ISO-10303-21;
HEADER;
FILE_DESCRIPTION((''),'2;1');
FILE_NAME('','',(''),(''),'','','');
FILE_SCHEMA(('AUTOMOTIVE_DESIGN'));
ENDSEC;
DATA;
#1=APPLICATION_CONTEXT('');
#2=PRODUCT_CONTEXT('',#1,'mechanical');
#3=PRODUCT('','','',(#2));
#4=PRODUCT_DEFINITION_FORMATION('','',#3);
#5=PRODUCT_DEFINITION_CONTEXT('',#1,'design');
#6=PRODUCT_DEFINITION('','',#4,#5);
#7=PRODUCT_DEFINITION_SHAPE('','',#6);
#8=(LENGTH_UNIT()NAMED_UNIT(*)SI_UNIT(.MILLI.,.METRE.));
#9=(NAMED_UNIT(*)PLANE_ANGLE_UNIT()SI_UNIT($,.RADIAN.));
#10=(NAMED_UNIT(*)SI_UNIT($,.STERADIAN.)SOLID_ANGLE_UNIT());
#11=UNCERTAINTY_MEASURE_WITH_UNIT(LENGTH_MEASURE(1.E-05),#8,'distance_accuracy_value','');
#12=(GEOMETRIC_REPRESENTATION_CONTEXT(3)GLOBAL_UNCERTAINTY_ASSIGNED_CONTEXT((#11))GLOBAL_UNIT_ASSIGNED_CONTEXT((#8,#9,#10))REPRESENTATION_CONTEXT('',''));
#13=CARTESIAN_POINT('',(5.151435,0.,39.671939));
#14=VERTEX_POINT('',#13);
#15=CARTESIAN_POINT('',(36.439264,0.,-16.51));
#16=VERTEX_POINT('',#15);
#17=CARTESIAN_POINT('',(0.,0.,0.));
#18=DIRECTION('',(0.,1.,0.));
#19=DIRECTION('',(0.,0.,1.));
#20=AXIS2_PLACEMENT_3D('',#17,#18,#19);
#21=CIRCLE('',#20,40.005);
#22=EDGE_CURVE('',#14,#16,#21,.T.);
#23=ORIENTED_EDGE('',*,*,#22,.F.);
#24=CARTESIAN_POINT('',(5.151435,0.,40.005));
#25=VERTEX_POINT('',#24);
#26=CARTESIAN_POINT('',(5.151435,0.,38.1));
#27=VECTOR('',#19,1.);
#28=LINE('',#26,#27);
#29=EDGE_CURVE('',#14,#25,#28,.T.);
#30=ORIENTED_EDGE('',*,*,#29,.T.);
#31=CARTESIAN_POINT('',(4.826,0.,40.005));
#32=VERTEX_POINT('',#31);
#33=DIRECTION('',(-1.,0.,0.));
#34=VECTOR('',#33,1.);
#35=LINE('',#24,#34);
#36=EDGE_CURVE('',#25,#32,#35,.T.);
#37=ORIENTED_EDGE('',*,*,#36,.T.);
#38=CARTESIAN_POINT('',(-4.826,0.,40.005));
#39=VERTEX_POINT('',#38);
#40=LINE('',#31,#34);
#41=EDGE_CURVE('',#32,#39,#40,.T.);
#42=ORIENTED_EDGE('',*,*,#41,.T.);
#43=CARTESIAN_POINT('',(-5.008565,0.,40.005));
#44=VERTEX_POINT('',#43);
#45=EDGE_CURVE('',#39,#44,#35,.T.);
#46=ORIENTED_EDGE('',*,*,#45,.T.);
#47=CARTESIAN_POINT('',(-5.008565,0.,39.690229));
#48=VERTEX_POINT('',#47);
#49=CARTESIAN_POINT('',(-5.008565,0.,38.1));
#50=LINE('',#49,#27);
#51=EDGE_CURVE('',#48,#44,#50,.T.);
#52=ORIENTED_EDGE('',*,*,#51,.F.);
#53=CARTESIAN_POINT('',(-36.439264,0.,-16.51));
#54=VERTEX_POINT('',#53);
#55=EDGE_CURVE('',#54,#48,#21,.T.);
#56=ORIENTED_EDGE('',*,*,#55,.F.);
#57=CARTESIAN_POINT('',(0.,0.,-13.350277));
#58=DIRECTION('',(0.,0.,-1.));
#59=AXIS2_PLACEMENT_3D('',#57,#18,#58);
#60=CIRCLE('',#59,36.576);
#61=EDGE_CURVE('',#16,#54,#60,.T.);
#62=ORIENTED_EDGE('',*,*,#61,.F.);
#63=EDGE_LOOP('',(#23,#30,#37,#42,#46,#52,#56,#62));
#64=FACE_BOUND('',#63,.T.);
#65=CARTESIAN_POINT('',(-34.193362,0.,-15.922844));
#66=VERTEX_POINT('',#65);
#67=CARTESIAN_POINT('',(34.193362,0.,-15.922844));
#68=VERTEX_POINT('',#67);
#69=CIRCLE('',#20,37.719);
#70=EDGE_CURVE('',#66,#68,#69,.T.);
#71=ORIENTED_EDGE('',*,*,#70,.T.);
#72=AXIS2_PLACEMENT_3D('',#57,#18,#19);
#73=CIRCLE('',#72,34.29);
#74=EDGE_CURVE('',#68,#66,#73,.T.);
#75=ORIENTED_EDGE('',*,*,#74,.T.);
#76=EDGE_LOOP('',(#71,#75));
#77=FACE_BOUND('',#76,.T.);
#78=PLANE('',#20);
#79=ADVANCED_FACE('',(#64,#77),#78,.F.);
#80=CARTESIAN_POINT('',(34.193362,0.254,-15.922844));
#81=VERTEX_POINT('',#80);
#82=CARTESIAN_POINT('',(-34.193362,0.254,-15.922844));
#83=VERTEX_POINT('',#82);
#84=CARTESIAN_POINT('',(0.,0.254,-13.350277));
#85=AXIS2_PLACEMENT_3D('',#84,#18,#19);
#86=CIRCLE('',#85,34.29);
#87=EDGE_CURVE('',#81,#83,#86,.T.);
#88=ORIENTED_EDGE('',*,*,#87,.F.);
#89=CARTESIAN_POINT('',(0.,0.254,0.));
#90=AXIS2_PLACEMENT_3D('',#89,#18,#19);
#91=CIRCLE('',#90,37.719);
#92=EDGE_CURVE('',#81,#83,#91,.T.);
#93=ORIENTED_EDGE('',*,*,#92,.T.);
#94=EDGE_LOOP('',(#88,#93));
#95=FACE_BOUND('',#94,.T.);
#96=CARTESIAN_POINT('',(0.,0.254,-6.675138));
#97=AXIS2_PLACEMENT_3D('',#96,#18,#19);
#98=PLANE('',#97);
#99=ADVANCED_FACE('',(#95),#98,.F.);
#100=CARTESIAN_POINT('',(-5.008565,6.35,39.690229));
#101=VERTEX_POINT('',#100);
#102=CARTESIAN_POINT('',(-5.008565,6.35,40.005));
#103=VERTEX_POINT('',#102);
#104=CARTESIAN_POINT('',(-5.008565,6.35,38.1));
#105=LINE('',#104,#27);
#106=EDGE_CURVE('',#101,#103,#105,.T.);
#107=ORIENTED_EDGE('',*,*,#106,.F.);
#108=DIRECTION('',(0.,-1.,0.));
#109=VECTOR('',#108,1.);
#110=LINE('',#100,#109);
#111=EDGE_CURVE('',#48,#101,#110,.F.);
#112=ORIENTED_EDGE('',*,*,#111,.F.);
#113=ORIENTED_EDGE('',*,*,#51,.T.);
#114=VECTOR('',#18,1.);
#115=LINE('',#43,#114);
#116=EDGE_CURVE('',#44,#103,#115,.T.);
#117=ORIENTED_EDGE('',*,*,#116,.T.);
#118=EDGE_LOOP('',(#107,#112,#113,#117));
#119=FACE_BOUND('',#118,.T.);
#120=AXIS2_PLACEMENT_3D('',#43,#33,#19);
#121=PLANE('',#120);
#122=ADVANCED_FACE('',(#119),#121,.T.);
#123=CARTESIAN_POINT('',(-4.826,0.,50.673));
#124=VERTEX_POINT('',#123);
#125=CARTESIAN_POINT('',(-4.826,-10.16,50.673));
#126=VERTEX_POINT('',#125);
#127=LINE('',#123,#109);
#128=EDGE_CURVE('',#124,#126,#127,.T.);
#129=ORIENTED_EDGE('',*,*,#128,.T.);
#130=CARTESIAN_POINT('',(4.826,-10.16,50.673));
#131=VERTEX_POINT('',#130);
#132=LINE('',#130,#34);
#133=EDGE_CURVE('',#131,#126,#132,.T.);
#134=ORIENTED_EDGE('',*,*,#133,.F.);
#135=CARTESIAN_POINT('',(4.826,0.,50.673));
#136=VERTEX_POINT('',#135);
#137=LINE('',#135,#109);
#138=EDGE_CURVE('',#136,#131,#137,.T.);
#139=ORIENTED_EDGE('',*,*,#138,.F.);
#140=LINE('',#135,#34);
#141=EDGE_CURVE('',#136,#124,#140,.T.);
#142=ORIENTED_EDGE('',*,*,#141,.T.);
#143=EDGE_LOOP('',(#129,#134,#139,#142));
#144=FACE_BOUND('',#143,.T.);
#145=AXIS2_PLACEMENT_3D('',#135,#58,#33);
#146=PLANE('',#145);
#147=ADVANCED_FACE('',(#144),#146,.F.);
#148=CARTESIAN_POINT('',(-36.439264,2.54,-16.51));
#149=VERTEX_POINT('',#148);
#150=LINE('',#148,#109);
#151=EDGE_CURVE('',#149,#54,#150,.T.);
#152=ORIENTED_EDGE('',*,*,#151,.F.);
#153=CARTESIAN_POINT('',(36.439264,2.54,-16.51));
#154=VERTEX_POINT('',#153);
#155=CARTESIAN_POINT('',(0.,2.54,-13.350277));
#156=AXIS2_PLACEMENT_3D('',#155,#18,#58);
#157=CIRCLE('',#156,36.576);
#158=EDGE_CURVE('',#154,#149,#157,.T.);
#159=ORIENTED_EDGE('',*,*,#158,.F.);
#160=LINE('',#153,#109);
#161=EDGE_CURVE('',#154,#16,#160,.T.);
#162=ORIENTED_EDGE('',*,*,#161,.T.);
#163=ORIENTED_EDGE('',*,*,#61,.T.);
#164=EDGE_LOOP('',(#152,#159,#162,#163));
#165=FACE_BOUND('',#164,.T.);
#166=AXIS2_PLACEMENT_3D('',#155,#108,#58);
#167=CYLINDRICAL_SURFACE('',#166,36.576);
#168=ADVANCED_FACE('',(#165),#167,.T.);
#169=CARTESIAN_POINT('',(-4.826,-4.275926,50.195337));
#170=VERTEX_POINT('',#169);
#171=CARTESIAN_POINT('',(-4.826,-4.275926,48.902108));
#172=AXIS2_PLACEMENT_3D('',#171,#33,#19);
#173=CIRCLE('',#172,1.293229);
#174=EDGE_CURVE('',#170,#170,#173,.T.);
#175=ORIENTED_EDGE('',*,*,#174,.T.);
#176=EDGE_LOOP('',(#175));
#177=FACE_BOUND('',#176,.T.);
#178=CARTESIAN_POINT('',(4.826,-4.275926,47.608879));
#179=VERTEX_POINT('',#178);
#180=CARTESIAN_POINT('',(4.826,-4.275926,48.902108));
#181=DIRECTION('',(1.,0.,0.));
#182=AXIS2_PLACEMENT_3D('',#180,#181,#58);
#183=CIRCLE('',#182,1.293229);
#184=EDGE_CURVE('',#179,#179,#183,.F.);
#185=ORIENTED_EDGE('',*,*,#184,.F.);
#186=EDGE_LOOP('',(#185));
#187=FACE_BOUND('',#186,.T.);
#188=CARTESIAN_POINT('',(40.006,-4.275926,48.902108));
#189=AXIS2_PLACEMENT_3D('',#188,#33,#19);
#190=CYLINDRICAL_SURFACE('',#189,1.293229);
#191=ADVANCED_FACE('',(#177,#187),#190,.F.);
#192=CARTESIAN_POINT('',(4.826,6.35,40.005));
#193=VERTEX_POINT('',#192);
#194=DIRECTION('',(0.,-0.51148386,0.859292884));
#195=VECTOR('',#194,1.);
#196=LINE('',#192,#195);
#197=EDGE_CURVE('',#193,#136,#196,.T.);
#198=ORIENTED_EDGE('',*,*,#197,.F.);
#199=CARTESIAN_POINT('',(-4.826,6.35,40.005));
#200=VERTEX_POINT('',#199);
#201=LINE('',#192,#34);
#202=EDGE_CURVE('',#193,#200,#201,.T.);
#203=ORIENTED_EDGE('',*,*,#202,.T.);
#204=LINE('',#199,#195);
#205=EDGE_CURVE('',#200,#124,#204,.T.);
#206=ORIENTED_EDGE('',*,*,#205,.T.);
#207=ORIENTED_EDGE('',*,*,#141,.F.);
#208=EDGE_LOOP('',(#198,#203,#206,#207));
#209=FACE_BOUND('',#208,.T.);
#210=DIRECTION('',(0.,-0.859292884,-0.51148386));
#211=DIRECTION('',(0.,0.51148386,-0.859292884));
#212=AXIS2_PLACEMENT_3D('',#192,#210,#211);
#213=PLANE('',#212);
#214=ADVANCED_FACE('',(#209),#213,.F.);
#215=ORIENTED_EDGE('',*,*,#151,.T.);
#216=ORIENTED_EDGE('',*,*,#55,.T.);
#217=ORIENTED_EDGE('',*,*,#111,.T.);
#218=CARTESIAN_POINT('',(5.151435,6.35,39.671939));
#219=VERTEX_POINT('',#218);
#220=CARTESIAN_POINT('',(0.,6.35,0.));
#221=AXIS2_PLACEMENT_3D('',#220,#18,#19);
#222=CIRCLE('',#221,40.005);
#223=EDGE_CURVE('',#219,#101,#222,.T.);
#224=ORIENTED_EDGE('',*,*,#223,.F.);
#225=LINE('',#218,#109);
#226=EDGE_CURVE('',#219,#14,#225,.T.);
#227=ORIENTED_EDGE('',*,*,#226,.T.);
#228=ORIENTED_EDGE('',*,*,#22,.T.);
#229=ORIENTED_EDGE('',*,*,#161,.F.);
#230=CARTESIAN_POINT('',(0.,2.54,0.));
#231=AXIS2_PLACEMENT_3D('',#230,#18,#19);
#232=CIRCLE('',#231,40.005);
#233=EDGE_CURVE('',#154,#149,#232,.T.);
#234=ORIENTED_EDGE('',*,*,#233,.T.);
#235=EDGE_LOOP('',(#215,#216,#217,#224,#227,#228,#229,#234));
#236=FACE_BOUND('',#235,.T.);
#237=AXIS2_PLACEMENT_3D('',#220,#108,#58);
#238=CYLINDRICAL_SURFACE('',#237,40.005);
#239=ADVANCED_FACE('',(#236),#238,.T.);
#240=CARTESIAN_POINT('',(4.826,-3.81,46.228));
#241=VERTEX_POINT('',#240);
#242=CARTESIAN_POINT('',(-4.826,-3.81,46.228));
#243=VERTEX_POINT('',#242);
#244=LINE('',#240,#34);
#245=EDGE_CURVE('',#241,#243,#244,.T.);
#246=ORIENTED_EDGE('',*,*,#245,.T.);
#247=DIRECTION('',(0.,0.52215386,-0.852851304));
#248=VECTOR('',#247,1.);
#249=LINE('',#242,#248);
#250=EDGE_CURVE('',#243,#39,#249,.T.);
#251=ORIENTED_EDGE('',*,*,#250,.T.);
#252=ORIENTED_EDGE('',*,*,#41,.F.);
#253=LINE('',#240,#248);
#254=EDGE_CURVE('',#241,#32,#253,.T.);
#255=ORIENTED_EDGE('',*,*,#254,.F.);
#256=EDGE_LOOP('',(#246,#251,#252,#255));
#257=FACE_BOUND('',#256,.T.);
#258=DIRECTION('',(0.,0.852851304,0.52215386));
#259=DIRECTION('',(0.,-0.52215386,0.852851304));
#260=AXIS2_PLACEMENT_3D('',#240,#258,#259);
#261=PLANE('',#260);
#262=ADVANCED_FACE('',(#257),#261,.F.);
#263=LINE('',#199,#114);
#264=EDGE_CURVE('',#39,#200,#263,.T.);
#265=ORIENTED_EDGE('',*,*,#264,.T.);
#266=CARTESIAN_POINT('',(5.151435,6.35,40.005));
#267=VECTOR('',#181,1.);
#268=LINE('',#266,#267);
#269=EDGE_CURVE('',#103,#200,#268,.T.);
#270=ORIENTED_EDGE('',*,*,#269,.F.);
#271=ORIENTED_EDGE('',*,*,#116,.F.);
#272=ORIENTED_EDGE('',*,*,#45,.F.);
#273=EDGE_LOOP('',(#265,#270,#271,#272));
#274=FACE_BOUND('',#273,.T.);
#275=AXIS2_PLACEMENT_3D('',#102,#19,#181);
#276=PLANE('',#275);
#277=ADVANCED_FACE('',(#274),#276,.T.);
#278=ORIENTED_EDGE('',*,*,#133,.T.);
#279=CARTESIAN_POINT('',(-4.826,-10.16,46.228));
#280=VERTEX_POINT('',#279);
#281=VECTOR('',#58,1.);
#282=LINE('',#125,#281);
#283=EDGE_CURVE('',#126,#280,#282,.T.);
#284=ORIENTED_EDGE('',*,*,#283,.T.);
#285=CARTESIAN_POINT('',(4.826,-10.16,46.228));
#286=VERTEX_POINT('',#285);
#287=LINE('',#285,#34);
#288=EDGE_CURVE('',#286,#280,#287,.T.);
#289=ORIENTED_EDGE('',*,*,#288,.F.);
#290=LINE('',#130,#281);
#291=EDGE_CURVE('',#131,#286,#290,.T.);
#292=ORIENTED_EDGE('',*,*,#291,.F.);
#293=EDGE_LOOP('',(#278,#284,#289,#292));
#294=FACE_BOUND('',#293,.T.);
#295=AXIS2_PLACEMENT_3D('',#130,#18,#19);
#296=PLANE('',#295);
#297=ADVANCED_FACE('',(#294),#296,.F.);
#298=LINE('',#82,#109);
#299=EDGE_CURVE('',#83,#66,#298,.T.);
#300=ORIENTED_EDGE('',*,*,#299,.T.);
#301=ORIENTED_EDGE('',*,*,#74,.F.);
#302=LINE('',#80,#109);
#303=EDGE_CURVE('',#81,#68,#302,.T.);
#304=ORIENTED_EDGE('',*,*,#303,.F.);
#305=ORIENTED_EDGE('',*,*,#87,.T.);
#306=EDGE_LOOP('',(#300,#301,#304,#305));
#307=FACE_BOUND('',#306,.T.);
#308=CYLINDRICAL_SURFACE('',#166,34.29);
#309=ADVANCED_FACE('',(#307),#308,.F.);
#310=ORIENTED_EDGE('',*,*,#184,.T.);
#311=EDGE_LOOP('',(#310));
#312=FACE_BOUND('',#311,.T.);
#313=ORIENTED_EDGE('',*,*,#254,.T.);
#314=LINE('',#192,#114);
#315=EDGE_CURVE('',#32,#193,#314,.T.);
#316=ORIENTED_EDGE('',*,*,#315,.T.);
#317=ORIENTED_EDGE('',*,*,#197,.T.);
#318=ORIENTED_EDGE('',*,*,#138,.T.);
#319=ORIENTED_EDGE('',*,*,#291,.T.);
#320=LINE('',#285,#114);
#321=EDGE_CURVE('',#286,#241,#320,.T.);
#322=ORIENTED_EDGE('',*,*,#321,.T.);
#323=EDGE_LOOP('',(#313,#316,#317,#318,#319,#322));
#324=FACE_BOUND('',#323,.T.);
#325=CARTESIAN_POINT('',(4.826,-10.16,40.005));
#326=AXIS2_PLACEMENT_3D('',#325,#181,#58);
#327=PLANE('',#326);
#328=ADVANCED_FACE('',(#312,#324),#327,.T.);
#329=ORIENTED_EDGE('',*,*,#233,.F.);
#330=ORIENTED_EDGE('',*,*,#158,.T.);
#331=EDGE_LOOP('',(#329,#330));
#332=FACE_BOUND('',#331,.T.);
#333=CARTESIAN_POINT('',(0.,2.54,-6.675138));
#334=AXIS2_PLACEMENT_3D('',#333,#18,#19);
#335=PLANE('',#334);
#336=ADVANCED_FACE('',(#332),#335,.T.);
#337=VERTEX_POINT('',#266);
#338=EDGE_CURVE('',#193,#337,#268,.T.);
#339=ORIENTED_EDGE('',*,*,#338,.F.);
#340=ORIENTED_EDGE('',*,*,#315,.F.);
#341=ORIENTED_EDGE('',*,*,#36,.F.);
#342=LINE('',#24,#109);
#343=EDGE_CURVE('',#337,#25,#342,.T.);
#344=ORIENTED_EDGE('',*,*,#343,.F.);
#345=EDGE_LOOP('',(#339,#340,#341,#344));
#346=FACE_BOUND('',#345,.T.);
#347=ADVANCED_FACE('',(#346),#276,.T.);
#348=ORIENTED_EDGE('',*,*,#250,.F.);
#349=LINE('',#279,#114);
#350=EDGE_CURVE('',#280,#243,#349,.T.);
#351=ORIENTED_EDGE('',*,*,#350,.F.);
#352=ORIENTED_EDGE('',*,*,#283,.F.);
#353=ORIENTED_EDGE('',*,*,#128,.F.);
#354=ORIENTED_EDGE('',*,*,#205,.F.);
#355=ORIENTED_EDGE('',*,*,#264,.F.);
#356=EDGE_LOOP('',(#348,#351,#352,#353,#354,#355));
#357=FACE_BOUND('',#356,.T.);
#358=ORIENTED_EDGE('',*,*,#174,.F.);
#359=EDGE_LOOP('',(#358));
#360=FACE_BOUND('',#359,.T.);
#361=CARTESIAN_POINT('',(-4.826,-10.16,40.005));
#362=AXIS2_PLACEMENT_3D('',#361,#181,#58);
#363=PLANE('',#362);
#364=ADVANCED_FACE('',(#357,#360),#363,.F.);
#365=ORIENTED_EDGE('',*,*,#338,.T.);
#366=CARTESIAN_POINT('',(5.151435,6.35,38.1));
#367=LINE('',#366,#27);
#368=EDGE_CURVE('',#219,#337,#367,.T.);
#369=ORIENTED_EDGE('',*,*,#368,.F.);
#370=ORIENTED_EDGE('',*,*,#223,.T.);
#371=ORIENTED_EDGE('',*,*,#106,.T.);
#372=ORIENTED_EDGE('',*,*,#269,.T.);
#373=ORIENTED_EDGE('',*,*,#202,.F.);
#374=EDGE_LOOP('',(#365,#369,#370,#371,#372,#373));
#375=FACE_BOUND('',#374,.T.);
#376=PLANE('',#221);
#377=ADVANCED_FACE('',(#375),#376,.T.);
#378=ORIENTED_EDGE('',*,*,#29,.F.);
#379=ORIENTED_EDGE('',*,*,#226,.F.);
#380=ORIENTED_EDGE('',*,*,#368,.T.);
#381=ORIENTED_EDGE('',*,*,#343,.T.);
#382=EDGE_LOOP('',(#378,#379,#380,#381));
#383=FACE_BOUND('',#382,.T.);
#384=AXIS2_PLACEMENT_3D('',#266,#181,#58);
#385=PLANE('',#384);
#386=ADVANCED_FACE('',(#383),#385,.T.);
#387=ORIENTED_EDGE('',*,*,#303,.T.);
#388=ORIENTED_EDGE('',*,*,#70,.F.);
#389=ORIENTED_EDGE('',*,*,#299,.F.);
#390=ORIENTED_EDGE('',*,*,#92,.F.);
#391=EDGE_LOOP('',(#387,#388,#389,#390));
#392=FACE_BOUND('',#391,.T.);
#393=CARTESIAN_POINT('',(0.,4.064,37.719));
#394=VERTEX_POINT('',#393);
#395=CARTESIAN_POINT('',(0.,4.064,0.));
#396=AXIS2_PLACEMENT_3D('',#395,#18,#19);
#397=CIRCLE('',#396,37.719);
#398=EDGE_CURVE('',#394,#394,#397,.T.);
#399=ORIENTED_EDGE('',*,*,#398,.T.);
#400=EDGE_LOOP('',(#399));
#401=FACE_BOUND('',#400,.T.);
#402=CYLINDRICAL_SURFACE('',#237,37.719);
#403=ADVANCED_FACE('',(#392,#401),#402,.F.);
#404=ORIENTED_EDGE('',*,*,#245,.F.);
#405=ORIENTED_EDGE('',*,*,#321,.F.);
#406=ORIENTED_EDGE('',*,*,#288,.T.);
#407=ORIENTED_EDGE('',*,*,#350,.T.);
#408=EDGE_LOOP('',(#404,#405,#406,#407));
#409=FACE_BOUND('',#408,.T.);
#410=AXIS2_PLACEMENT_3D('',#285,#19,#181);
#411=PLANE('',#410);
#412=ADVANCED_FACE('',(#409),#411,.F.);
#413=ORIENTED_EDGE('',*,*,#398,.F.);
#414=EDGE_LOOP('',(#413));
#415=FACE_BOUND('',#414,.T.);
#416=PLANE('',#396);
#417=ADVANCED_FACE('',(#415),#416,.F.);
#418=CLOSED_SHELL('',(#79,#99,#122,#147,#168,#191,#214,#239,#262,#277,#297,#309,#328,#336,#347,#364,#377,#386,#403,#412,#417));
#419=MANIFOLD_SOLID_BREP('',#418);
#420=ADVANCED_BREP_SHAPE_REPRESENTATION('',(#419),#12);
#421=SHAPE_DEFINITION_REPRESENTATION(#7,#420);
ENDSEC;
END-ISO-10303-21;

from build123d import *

# Parameters (mm, degrees)
SKETCH1_R           = 40.005
BOSS_EXTRUDE1_DEPTH = 6.35
BOSS_EXTRUDE2_DEPTH = 2.54
SHELL2_OUTLINE_R    = 37.719
SHELL2_DEPTH        = 4.064
SHELL2_2_DEPTH      = 0.254
BOSS_EXTRUDE3_DEPTH = 4.826
CUT_EXTRUDE1_REACH  = 70.416
SKETCH10_R          = 1.293229199


# Read off the part's stored shape, not the designer's step: Shell2
with BuildPart() as part:
    # Sketch1 → Boss-Extrude1 (new body)
    with BuildSketch(Plane(origin=(0, 0, 0), x_dir=(1, 0, 0), z_dir=(0, 1, 0))):
        with Locations(Location((0, 0, 0), (0, 0, 270))):
            Circle(SKETCH1_R)
    extrude(amount=BOSS_EXTRUDE1_DEPTH)

    # Sketch2 → Boss-Extrude2 (add)
    with BuildSketch(Plane(origin=(0, 0, 0), x_dir=(1, 0, 0), z_dir=(0, 1, 0))):
        with BuildLine():
            ThreePointArc((-36.439263508, 16.51), (0, 49.926276753), (36.439263508, 16.51))
            ThreePointArc((36.439263508, 16.51), (0, -40.005), (-36.439263508, 16.51))
        make_face()
    extrude(amount=BOSS_EXTRUDE2_DEPTH)

    # Shell2 outline → Shell2 (cut)
    with BuildSketch(Plane(origin=(0, 0, 0), x_dir=(1, 0, 0), z_dir=(0, 1, 0))):
        Circle(SHELL2_OUTLINE_R)
    extrude(amount=SHELL2_DEPTH, mode=Mode.SUBTRACT)

    # Shell2 2 outline → Shell2 2 (cut)
    with BuildSketch(Plane(origin=(0, 0, 0), x_dir=(1, 0, 0), z_dir=(0, 1, 0))):
        with BuildLine():
            ThreePointArc((-34.19336189, 15.922844082), (0, 37.719), (34.19336189, 15.922844082))
            ThreePointArc((34.19336189, 15.922844082), (0, 47.640276753), (-34.19336189, 15.922844082))
        make_face()
    extrude(amount=SHELL2_2_DEPTH, mode=Mode.SUBTRACT)



with BuildPart() as body_2:
    # Sketch6 → Boss-Extrude3 (new, symmetric)
    with BuildSketch(Plane(origin=(0, 0, 0), x_dir=(0, 0, -1), z_dir=(1, 0, 0))):
        Polygon((-40.005, 6.35), (-50.673, 0), (-50.673, -10.16), (-46.228, -10.16), (-46.228, -3.81), (-40.005, 0), align=None)
    extrude(amount=BOSS_EXTRUDE3_DEPTH, both=True)


with BuildPart() as part_1:
    add(part.part)

    add(body_2.part)  # Loft1 merges body 2
    # Sketch9 → Loft1 section 0
    with BuildSketch(Plane.XY.offset(38.1)):
        with BuildLine():
            Line((-5.008565366, 6.35), (5.151434634, 6.35))
            Line((5.151434634, 6.35), (5.151434634, 0))
            Line((5.151434634, 0), (-5.008565366, 0))
            Line((-5.008565366, 0), (-5.008565366, 6.35))
        make_face()
    # Sketch7 → Loft1 section 1
    with BuildSketch(Plane(origin=(0, 0, 40.005), x_dir=(-1, 0, 0), z_dir=(0, 0, -1))):
        with BuildLine():
            Line((-5.151434634, 0), (5.008565366, 0))
            Line((5.008565366, 0), (5.008565366, 6.35))
            Line((5.008565366, 6.35), (-5.151434634, 6.35))
            Line((-5.151434634, 6.35), (-5.151434634, 0))
        make_face()
    loft()

    # Sketch10 → Cut-Extrude1 (cut, up to next)
    with BuildSketch(Plane.ZY.offset(4.826), mode=Mode.PRIVATE) as cut_extrude1_sk1:
        with Locations((48.902107894, -4.275925595)):
            Circle(SKETCH10_R)
    cut_extrude1_tool1 = extrude(cut_extrude1_sk1.sketch, amount=-CUT_EXTRUDE1_REACH, mode=Mode.PRIVATE) & part_1.part
    add(cut_extrude1_tool1.solids().sort_by_distance((-4.826, -4.275926, 48.902108))[0], mode=Mode.SUBTRACT)


solid = part_1.part
